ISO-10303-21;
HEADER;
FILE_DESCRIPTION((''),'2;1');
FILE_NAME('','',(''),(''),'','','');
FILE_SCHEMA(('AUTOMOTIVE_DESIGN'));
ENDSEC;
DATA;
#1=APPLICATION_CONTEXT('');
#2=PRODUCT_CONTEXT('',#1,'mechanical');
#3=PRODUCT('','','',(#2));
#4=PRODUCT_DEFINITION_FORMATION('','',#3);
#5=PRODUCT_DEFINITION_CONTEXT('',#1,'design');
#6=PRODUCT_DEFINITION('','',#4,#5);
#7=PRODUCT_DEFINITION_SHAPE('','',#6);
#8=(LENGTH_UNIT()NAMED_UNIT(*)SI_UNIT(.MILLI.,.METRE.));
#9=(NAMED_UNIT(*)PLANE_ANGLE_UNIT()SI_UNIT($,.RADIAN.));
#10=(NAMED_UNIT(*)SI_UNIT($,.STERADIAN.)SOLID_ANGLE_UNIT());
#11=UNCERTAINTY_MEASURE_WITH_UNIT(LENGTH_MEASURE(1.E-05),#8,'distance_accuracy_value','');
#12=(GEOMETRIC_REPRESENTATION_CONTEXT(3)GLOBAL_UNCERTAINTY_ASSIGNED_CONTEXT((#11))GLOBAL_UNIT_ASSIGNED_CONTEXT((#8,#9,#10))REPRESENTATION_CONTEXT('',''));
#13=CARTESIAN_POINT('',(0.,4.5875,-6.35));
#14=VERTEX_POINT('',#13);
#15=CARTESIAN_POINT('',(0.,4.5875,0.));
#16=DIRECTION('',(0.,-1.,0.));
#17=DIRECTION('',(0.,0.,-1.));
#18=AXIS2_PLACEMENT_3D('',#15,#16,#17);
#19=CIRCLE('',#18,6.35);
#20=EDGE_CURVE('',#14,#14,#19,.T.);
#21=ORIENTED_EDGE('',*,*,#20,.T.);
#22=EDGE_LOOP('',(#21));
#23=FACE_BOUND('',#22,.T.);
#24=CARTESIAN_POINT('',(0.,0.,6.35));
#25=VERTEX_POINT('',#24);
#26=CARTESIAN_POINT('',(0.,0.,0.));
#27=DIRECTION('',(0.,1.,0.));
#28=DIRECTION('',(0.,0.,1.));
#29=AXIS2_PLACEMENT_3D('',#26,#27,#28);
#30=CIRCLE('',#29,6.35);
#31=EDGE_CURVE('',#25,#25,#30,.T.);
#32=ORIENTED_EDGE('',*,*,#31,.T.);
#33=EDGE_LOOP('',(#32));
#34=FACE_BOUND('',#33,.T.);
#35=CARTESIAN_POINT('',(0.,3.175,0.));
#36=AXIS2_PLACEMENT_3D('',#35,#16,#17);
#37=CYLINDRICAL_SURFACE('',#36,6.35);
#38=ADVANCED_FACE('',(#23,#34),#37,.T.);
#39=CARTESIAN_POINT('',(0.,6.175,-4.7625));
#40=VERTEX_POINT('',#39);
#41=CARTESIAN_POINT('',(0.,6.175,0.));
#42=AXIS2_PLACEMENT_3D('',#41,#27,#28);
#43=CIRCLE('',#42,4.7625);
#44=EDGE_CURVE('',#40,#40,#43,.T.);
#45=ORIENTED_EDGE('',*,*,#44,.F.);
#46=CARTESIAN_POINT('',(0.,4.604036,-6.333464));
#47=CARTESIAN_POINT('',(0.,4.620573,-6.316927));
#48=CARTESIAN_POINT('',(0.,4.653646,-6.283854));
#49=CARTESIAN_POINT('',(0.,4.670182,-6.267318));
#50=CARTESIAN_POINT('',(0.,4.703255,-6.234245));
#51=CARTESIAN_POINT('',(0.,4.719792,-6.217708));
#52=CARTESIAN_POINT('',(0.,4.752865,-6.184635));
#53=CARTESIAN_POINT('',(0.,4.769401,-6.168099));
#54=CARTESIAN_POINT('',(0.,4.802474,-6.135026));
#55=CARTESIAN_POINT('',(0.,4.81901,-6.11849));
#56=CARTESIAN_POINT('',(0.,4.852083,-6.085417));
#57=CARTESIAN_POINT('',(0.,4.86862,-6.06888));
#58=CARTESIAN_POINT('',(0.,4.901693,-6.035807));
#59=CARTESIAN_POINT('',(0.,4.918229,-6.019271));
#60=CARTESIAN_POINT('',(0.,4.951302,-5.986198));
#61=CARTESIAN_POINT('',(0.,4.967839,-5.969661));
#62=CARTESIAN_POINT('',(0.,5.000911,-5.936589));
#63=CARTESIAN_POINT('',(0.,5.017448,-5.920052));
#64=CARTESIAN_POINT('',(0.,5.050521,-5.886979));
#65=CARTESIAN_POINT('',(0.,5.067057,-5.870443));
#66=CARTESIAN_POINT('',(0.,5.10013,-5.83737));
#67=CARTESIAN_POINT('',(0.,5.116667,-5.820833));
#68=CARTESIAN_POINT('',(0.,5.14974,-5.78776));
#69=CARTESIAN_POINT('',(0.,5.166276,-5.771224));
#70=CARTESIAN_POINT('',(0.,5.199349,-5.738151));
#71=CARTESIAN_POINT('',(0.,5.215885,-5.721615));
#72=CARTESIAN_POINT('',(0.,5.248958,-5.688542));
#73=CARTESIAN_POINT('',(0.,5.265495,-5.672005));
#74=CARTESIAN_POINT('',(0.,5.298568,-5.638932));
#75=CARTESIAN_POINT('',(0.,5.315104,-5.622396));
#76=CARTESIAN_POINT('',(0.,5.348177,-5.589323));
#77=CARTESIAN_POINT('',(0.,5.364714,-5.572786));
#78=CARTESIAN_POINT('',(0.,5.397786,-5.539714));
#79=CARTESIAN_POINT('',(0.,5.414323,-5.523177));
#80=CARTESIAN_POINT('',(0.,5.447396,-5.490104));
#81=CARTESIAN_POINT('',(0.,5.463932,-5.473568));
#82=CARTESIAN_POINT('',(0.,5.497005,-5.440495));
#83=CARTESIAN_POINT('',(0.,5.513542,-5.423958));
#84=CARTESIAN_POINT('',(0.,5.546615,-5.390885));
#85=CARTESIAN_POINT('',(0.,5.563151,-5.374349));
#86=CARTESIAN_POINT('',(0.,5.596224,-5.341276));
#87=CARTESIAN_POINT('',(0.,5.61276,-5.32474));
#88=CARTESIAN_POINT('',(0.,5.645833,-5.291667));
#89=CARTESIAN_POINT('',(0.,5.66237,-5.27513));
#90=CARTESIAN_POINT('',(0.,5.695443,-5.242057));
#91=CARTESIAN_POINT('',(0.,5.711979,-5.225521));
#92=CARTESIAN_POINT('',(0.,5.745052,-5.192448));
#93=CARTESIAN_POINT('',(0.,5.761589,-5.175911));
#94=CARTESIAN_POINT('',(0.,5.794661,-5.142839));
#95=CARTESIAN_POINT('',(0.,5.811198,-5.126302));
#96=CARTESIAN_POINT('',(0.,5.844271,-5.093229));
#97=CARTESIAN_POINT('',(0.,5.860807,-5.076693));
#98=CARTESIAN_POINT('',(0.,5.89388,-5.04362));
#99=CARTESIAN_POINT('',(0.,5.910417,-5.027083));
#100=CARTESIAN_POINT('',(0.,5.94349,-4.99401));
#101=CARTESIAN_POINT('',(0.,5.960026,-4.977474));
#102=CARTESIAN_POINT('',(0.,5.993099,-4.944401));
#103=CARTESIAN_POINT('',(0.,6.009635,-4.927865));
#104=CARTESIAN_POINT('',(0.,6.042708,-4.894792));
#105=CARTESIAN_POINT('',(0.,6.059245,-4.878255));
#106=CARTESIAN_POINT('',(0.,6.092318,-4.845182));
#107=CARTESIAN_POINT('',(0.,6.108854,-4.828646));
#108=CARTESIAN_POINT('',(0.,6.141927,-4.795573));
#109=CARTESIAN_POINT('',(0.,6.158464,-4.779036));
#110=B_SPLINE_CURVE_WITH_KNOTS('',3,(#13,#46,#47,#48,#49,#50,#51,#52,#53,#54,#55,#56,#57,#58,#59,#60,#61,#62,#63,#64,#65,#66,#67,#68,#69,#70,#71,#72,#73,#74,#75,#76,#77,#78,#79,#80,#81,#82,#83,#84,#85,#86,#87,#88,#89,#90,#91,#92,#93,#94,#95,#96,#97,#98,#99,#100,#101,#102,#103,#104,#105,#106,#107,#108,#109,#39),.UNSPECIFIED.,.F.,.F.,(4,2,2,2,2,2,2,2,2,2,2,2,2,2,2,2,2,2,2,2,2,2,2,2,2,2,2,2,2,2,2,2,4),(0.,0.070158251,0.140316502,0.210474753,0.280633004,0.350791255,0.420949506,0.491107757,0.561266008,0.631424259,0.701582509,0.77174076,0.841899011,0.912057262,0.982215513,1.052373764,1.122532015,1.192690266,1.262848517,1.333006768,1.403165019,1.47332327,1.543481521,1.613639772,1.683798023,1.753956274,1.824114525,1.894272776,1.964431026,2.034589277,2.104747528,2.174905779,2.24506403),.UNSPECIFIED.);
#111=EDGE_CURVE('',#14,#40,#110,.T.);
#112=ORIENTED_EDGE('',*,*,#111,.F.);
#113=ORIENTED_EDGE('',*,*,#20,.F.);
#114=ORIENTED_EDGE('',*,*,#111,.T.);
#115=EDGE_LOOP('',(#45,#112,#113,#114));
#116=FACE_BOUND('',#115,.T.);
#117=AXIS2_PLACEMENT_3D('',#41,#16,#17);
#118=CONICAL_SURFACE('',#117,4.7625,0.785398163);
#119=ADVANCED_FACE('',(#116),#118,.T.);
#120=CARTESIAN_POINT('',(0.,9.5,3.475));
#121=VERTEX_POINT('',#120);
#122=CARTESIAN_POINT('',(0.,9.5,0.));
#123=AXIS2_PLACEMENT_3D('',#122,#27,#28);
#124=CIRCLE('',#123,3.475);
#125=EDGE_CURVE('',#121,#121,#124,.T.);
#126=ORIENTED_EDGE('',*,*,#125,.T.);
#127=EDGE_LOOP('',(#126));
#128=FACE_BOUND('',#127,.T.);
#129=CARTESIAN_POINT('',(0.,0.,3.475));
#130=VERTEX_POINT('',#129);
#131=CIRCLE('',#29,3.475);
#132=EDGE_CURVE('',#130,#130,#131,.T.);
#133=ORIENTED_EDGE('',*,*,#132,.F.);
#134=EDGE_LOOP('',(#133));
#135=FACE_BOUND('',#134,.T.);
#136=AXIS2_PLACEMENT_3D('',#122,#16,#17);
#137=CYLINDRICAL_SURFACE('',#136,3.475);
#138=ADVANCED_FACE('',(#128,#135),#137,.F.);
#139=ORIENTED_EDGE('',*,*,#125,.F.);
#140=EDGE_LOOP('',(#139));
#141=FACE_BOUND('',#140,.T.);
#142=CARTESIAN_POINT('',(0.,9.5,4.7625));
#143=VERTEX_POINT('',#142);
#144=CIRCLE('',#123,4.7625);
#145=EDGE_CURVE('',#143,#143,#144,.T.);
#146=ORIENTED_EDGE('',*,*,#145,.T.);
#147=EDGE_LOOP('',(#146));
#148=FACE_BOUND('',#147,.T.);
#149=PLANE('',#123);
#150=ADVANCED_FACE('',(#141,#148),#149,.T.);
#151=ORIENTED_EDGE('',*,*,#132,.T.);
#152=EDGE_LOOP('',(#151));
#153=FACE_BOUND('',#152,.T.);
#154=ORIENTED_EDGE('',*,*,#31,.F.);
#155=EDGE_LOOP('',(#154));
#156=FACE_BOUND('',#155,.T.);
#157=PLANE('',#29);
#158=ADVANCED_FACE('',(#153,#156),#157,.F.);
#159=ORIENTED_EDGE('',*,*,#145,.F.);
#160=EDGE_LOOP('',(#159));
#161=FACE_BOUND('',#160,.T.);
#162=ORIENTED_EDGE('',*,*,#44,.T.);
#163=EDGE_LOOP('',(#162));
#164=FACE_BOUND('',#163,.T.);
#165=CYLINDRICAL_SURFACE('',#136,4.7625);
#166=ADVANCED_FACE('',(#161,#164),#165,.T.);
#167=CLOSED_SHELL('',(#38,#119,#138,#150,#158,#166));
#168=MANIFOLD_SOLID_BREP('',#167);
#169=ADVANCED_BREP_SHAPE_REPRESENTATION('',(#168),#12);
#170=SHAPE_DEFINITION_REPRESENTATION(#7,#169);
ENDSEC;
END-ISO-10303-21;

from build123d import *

# Parameters (mm, degrees)
SKETCH1_R           = 6.35
SKETCH1_R_2         = 4.7625
BOSS_EXTRUDE1_DEPTH = 3.175
SKETCH1_3_R         = 4.7625
SKETCH1_3_R_2       = 3.475
BOSS_EXTRUDE2_DEPTH = 9.5
CHAMFER1_SIZE       = 3


with BuildPart() as part:
    # Sketch1 → Boss-Extrude1 (new body)
    with BuildSketch(Plane(origin=(0, 0, 0), x_dir=(1, 0, 0), z_dir=(0, 1, 0))):
        with Locations(Location((0, 0, 0), (0, 0, 270))):
            Circle(SKETCH1_R)
        with Locations(Location((0, 0, 0), (0, 0, 270))):
            Circle(SKETCH1_R_2, mode=Mode.SUBTRACT)
    extrude(amount=BOSS_EXTRUDE1_DEPTH)

    # Sketch1<3> → Boss-Extrude2 (add)
    with BuildSketch(Plane(origin=(0, 0, 0), x_dir=(1, 0, 0), z_dir=(0, 1, 0))):
        with Locations(Location((0, 0, 0), (0, 0, 270))):
            Circle(SKETCH1_3_R)
        with Locations(Location((0, 0, 0), (0, 0, 270))):
            Circle(SKETCH1_3_R_2, mode=Mode.SUBTRACT)
    extrude(amount=BOSS_EXTRUDE2_DEPTH)

    # Chamfer1
    # the kernel refuses this chamfer: 3 mm, written as the material it adds along each edge
    with BuildSketch(Plane(origin=(0, 3.175, 0), x_dir=(0, 0, 1), z_dir=(-1, 0, 0))) as chamfer1_piece_1_section:
        Polygon((4.7625 + CHAMFER1_SIZE, 0), (4.7625, CHAMFER1_SIZE), (4.7625, 0), align=None)
    chamfer1_piece_1 = revolve(axis=Axis((0, 3.175, 0), (0, 1, 0)), mode=Mode.PRIVATE)
    chamfer1_piece_1 = chamfer1_piece_1 & Plane(origin=(0, 5.38786909, 0), x_dir=(0, 0, 1), z_dir=(0, -1, 0)) * Cylinder(6.35, 32, mode=Mode.PRIVATE)
    add(chamfer1_piece_1)


solid = part.part
